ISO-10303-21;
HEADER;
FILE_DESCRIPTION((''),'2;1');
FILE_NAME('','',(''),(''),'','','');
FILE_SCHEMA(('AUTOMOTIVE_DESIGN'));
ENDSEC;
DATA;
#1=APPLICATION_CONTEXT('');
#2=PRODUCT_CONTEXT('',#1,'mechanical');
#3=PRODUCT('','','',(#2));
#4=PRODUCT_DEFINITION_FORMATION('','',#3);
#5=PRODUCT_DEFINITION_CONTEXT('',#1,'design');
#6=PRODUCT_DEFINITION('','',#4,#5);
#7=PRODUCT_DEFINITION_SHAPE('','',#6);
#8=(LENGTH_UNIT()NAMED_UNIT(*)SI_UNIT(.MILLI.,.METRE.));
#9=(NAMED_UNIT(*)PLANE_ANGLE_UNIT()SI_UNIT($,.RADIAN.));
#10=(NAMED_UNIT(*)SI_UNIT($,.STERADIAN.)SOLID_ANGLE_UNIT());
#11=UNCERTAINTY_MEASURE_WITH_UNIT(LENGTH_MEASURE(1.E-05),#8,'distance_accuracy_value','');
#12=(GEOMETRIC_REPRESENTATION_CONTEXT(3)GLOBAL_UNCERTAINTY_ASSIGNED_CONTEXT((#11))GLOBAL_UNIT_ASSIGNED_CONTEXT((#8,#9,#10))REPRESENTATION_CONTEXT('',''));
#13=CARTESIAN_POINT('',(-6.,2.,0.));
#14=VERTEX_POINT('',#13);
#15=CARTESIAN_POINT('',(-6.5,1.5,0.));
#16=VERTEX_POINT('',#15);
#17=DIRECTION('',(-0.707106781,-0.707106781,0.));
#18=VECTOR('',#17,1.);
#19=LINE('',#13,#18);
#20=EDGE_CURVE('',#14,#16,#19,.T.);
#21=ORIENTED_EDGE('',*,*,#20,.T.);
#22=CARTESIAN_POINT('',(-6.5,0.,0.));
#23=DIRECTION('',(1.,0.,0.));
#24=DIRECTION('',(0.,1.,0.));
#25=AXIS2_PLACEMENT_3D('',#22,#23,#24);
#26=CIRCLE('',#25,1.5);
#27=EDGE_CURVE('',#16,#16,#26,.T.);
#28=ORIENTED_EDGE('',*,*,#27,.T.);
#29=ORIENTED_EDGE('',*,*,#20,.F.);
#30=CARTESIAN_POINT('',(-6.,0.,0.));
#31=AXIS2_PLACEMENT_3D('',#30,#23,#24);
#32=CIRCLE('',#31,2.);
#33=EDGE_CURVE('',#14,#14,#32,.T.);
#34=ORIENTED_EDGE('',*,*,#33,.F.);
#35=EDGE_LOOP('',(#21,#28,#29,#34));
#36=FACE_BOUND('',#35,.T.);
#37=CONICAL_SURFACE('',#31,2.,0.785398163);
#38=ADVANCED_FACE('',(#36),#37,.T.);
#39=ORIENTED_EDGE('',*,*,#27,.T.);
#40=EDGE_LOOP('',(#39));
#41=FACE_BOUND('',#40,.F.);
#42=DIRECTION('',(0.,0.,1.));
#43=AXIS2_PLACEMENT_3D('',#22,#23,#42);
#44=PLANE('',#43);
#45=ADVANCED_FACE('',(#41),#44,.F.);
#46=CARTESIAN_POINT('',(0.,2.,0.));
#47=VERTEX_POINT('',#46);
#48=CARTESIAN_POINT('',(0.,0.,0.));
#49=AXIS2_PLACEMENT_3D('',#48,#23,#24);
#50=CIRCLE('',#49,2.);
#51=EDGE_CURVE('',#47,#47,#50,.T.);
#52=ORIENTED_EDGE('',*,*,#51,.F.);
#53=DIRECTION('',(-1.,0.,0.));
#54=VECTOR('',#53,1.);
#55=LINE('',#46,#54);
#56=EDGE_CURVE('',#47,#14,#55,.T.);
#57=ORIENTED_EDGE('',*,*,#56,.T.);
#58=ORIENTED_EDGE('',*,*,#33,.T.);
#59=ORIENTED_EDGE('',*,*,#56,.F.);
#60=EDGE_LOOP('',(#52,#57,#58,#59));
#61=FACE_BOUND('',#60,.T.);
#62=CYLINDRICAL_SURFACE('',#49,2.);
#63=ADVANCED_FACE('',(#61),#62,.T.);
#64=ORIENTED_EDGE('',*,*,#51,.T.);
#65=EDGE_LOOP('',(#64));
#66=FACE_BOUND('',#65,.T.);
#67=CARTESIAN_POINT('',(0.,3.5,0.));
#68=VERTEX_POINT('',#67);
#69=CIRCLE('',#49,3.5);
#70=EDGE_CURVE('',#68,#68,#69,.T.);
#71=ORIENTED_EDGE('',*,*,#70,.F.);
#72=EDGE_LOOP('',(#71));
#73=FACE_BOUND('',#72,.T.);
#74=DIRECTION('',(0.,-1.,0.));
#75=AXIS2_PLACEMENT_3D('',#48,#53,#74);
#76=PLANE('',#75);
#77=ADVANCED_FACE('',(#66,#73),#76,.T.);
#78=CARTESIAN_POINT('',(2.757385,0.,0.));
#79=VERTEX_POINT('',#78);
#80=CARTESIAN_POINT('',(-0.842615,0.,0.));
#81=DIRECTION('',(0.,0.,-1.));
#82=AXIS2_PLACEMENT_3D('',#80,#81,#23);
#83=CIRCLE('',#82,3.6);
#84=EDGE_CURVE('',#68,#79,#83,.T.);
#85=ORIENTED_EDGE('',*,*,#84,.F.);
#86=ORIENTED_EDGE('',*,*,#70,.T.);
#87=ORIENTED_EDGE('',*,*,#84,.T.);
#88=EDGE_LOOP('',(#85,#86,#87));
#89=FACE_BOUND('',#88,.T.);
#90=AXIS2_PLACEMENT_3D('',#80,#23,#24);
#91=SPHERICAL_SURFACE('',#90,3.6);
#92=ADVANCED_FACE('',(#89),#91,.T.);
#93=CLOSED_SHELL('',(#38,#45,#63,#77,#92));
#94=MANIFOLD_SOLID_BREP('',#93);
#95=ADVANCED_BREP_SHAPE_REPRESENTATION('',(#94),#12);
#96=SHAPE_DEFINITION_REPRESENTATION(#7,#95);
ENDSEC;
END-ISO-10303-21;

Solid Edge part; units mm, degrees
sketch "Sketch1" plane through (0, 0, 0) normal (1, 0, 0) x (0, 1, 0)
  circle A0 centre (0, 0) radius 2
extrude "Protrusion1" add sketch "Sketch1" against normal blind 6.5
sketch "Sketch2" plane through (0, 0, 0) normal (0, 0, 1) x (1, 0, 0)
  arc A0 (0, 3.5) -> (2.757385, 0) centre (-0.842615, 0) cw
  line L0 (0, 0) -> (2.757385, 0)
  line L1 (0, 0) -> (0, 3.5)
revolve "RevolvedProtrusion1" add sketch "Sketch2" angle 360 about axis through (0, 0, 0) along (1, 0, 0)
chamfer "Chamfer_1" distance 0.5 angle 45 1 edges at (-6.5, -2, 0)
properties material "PVC"
